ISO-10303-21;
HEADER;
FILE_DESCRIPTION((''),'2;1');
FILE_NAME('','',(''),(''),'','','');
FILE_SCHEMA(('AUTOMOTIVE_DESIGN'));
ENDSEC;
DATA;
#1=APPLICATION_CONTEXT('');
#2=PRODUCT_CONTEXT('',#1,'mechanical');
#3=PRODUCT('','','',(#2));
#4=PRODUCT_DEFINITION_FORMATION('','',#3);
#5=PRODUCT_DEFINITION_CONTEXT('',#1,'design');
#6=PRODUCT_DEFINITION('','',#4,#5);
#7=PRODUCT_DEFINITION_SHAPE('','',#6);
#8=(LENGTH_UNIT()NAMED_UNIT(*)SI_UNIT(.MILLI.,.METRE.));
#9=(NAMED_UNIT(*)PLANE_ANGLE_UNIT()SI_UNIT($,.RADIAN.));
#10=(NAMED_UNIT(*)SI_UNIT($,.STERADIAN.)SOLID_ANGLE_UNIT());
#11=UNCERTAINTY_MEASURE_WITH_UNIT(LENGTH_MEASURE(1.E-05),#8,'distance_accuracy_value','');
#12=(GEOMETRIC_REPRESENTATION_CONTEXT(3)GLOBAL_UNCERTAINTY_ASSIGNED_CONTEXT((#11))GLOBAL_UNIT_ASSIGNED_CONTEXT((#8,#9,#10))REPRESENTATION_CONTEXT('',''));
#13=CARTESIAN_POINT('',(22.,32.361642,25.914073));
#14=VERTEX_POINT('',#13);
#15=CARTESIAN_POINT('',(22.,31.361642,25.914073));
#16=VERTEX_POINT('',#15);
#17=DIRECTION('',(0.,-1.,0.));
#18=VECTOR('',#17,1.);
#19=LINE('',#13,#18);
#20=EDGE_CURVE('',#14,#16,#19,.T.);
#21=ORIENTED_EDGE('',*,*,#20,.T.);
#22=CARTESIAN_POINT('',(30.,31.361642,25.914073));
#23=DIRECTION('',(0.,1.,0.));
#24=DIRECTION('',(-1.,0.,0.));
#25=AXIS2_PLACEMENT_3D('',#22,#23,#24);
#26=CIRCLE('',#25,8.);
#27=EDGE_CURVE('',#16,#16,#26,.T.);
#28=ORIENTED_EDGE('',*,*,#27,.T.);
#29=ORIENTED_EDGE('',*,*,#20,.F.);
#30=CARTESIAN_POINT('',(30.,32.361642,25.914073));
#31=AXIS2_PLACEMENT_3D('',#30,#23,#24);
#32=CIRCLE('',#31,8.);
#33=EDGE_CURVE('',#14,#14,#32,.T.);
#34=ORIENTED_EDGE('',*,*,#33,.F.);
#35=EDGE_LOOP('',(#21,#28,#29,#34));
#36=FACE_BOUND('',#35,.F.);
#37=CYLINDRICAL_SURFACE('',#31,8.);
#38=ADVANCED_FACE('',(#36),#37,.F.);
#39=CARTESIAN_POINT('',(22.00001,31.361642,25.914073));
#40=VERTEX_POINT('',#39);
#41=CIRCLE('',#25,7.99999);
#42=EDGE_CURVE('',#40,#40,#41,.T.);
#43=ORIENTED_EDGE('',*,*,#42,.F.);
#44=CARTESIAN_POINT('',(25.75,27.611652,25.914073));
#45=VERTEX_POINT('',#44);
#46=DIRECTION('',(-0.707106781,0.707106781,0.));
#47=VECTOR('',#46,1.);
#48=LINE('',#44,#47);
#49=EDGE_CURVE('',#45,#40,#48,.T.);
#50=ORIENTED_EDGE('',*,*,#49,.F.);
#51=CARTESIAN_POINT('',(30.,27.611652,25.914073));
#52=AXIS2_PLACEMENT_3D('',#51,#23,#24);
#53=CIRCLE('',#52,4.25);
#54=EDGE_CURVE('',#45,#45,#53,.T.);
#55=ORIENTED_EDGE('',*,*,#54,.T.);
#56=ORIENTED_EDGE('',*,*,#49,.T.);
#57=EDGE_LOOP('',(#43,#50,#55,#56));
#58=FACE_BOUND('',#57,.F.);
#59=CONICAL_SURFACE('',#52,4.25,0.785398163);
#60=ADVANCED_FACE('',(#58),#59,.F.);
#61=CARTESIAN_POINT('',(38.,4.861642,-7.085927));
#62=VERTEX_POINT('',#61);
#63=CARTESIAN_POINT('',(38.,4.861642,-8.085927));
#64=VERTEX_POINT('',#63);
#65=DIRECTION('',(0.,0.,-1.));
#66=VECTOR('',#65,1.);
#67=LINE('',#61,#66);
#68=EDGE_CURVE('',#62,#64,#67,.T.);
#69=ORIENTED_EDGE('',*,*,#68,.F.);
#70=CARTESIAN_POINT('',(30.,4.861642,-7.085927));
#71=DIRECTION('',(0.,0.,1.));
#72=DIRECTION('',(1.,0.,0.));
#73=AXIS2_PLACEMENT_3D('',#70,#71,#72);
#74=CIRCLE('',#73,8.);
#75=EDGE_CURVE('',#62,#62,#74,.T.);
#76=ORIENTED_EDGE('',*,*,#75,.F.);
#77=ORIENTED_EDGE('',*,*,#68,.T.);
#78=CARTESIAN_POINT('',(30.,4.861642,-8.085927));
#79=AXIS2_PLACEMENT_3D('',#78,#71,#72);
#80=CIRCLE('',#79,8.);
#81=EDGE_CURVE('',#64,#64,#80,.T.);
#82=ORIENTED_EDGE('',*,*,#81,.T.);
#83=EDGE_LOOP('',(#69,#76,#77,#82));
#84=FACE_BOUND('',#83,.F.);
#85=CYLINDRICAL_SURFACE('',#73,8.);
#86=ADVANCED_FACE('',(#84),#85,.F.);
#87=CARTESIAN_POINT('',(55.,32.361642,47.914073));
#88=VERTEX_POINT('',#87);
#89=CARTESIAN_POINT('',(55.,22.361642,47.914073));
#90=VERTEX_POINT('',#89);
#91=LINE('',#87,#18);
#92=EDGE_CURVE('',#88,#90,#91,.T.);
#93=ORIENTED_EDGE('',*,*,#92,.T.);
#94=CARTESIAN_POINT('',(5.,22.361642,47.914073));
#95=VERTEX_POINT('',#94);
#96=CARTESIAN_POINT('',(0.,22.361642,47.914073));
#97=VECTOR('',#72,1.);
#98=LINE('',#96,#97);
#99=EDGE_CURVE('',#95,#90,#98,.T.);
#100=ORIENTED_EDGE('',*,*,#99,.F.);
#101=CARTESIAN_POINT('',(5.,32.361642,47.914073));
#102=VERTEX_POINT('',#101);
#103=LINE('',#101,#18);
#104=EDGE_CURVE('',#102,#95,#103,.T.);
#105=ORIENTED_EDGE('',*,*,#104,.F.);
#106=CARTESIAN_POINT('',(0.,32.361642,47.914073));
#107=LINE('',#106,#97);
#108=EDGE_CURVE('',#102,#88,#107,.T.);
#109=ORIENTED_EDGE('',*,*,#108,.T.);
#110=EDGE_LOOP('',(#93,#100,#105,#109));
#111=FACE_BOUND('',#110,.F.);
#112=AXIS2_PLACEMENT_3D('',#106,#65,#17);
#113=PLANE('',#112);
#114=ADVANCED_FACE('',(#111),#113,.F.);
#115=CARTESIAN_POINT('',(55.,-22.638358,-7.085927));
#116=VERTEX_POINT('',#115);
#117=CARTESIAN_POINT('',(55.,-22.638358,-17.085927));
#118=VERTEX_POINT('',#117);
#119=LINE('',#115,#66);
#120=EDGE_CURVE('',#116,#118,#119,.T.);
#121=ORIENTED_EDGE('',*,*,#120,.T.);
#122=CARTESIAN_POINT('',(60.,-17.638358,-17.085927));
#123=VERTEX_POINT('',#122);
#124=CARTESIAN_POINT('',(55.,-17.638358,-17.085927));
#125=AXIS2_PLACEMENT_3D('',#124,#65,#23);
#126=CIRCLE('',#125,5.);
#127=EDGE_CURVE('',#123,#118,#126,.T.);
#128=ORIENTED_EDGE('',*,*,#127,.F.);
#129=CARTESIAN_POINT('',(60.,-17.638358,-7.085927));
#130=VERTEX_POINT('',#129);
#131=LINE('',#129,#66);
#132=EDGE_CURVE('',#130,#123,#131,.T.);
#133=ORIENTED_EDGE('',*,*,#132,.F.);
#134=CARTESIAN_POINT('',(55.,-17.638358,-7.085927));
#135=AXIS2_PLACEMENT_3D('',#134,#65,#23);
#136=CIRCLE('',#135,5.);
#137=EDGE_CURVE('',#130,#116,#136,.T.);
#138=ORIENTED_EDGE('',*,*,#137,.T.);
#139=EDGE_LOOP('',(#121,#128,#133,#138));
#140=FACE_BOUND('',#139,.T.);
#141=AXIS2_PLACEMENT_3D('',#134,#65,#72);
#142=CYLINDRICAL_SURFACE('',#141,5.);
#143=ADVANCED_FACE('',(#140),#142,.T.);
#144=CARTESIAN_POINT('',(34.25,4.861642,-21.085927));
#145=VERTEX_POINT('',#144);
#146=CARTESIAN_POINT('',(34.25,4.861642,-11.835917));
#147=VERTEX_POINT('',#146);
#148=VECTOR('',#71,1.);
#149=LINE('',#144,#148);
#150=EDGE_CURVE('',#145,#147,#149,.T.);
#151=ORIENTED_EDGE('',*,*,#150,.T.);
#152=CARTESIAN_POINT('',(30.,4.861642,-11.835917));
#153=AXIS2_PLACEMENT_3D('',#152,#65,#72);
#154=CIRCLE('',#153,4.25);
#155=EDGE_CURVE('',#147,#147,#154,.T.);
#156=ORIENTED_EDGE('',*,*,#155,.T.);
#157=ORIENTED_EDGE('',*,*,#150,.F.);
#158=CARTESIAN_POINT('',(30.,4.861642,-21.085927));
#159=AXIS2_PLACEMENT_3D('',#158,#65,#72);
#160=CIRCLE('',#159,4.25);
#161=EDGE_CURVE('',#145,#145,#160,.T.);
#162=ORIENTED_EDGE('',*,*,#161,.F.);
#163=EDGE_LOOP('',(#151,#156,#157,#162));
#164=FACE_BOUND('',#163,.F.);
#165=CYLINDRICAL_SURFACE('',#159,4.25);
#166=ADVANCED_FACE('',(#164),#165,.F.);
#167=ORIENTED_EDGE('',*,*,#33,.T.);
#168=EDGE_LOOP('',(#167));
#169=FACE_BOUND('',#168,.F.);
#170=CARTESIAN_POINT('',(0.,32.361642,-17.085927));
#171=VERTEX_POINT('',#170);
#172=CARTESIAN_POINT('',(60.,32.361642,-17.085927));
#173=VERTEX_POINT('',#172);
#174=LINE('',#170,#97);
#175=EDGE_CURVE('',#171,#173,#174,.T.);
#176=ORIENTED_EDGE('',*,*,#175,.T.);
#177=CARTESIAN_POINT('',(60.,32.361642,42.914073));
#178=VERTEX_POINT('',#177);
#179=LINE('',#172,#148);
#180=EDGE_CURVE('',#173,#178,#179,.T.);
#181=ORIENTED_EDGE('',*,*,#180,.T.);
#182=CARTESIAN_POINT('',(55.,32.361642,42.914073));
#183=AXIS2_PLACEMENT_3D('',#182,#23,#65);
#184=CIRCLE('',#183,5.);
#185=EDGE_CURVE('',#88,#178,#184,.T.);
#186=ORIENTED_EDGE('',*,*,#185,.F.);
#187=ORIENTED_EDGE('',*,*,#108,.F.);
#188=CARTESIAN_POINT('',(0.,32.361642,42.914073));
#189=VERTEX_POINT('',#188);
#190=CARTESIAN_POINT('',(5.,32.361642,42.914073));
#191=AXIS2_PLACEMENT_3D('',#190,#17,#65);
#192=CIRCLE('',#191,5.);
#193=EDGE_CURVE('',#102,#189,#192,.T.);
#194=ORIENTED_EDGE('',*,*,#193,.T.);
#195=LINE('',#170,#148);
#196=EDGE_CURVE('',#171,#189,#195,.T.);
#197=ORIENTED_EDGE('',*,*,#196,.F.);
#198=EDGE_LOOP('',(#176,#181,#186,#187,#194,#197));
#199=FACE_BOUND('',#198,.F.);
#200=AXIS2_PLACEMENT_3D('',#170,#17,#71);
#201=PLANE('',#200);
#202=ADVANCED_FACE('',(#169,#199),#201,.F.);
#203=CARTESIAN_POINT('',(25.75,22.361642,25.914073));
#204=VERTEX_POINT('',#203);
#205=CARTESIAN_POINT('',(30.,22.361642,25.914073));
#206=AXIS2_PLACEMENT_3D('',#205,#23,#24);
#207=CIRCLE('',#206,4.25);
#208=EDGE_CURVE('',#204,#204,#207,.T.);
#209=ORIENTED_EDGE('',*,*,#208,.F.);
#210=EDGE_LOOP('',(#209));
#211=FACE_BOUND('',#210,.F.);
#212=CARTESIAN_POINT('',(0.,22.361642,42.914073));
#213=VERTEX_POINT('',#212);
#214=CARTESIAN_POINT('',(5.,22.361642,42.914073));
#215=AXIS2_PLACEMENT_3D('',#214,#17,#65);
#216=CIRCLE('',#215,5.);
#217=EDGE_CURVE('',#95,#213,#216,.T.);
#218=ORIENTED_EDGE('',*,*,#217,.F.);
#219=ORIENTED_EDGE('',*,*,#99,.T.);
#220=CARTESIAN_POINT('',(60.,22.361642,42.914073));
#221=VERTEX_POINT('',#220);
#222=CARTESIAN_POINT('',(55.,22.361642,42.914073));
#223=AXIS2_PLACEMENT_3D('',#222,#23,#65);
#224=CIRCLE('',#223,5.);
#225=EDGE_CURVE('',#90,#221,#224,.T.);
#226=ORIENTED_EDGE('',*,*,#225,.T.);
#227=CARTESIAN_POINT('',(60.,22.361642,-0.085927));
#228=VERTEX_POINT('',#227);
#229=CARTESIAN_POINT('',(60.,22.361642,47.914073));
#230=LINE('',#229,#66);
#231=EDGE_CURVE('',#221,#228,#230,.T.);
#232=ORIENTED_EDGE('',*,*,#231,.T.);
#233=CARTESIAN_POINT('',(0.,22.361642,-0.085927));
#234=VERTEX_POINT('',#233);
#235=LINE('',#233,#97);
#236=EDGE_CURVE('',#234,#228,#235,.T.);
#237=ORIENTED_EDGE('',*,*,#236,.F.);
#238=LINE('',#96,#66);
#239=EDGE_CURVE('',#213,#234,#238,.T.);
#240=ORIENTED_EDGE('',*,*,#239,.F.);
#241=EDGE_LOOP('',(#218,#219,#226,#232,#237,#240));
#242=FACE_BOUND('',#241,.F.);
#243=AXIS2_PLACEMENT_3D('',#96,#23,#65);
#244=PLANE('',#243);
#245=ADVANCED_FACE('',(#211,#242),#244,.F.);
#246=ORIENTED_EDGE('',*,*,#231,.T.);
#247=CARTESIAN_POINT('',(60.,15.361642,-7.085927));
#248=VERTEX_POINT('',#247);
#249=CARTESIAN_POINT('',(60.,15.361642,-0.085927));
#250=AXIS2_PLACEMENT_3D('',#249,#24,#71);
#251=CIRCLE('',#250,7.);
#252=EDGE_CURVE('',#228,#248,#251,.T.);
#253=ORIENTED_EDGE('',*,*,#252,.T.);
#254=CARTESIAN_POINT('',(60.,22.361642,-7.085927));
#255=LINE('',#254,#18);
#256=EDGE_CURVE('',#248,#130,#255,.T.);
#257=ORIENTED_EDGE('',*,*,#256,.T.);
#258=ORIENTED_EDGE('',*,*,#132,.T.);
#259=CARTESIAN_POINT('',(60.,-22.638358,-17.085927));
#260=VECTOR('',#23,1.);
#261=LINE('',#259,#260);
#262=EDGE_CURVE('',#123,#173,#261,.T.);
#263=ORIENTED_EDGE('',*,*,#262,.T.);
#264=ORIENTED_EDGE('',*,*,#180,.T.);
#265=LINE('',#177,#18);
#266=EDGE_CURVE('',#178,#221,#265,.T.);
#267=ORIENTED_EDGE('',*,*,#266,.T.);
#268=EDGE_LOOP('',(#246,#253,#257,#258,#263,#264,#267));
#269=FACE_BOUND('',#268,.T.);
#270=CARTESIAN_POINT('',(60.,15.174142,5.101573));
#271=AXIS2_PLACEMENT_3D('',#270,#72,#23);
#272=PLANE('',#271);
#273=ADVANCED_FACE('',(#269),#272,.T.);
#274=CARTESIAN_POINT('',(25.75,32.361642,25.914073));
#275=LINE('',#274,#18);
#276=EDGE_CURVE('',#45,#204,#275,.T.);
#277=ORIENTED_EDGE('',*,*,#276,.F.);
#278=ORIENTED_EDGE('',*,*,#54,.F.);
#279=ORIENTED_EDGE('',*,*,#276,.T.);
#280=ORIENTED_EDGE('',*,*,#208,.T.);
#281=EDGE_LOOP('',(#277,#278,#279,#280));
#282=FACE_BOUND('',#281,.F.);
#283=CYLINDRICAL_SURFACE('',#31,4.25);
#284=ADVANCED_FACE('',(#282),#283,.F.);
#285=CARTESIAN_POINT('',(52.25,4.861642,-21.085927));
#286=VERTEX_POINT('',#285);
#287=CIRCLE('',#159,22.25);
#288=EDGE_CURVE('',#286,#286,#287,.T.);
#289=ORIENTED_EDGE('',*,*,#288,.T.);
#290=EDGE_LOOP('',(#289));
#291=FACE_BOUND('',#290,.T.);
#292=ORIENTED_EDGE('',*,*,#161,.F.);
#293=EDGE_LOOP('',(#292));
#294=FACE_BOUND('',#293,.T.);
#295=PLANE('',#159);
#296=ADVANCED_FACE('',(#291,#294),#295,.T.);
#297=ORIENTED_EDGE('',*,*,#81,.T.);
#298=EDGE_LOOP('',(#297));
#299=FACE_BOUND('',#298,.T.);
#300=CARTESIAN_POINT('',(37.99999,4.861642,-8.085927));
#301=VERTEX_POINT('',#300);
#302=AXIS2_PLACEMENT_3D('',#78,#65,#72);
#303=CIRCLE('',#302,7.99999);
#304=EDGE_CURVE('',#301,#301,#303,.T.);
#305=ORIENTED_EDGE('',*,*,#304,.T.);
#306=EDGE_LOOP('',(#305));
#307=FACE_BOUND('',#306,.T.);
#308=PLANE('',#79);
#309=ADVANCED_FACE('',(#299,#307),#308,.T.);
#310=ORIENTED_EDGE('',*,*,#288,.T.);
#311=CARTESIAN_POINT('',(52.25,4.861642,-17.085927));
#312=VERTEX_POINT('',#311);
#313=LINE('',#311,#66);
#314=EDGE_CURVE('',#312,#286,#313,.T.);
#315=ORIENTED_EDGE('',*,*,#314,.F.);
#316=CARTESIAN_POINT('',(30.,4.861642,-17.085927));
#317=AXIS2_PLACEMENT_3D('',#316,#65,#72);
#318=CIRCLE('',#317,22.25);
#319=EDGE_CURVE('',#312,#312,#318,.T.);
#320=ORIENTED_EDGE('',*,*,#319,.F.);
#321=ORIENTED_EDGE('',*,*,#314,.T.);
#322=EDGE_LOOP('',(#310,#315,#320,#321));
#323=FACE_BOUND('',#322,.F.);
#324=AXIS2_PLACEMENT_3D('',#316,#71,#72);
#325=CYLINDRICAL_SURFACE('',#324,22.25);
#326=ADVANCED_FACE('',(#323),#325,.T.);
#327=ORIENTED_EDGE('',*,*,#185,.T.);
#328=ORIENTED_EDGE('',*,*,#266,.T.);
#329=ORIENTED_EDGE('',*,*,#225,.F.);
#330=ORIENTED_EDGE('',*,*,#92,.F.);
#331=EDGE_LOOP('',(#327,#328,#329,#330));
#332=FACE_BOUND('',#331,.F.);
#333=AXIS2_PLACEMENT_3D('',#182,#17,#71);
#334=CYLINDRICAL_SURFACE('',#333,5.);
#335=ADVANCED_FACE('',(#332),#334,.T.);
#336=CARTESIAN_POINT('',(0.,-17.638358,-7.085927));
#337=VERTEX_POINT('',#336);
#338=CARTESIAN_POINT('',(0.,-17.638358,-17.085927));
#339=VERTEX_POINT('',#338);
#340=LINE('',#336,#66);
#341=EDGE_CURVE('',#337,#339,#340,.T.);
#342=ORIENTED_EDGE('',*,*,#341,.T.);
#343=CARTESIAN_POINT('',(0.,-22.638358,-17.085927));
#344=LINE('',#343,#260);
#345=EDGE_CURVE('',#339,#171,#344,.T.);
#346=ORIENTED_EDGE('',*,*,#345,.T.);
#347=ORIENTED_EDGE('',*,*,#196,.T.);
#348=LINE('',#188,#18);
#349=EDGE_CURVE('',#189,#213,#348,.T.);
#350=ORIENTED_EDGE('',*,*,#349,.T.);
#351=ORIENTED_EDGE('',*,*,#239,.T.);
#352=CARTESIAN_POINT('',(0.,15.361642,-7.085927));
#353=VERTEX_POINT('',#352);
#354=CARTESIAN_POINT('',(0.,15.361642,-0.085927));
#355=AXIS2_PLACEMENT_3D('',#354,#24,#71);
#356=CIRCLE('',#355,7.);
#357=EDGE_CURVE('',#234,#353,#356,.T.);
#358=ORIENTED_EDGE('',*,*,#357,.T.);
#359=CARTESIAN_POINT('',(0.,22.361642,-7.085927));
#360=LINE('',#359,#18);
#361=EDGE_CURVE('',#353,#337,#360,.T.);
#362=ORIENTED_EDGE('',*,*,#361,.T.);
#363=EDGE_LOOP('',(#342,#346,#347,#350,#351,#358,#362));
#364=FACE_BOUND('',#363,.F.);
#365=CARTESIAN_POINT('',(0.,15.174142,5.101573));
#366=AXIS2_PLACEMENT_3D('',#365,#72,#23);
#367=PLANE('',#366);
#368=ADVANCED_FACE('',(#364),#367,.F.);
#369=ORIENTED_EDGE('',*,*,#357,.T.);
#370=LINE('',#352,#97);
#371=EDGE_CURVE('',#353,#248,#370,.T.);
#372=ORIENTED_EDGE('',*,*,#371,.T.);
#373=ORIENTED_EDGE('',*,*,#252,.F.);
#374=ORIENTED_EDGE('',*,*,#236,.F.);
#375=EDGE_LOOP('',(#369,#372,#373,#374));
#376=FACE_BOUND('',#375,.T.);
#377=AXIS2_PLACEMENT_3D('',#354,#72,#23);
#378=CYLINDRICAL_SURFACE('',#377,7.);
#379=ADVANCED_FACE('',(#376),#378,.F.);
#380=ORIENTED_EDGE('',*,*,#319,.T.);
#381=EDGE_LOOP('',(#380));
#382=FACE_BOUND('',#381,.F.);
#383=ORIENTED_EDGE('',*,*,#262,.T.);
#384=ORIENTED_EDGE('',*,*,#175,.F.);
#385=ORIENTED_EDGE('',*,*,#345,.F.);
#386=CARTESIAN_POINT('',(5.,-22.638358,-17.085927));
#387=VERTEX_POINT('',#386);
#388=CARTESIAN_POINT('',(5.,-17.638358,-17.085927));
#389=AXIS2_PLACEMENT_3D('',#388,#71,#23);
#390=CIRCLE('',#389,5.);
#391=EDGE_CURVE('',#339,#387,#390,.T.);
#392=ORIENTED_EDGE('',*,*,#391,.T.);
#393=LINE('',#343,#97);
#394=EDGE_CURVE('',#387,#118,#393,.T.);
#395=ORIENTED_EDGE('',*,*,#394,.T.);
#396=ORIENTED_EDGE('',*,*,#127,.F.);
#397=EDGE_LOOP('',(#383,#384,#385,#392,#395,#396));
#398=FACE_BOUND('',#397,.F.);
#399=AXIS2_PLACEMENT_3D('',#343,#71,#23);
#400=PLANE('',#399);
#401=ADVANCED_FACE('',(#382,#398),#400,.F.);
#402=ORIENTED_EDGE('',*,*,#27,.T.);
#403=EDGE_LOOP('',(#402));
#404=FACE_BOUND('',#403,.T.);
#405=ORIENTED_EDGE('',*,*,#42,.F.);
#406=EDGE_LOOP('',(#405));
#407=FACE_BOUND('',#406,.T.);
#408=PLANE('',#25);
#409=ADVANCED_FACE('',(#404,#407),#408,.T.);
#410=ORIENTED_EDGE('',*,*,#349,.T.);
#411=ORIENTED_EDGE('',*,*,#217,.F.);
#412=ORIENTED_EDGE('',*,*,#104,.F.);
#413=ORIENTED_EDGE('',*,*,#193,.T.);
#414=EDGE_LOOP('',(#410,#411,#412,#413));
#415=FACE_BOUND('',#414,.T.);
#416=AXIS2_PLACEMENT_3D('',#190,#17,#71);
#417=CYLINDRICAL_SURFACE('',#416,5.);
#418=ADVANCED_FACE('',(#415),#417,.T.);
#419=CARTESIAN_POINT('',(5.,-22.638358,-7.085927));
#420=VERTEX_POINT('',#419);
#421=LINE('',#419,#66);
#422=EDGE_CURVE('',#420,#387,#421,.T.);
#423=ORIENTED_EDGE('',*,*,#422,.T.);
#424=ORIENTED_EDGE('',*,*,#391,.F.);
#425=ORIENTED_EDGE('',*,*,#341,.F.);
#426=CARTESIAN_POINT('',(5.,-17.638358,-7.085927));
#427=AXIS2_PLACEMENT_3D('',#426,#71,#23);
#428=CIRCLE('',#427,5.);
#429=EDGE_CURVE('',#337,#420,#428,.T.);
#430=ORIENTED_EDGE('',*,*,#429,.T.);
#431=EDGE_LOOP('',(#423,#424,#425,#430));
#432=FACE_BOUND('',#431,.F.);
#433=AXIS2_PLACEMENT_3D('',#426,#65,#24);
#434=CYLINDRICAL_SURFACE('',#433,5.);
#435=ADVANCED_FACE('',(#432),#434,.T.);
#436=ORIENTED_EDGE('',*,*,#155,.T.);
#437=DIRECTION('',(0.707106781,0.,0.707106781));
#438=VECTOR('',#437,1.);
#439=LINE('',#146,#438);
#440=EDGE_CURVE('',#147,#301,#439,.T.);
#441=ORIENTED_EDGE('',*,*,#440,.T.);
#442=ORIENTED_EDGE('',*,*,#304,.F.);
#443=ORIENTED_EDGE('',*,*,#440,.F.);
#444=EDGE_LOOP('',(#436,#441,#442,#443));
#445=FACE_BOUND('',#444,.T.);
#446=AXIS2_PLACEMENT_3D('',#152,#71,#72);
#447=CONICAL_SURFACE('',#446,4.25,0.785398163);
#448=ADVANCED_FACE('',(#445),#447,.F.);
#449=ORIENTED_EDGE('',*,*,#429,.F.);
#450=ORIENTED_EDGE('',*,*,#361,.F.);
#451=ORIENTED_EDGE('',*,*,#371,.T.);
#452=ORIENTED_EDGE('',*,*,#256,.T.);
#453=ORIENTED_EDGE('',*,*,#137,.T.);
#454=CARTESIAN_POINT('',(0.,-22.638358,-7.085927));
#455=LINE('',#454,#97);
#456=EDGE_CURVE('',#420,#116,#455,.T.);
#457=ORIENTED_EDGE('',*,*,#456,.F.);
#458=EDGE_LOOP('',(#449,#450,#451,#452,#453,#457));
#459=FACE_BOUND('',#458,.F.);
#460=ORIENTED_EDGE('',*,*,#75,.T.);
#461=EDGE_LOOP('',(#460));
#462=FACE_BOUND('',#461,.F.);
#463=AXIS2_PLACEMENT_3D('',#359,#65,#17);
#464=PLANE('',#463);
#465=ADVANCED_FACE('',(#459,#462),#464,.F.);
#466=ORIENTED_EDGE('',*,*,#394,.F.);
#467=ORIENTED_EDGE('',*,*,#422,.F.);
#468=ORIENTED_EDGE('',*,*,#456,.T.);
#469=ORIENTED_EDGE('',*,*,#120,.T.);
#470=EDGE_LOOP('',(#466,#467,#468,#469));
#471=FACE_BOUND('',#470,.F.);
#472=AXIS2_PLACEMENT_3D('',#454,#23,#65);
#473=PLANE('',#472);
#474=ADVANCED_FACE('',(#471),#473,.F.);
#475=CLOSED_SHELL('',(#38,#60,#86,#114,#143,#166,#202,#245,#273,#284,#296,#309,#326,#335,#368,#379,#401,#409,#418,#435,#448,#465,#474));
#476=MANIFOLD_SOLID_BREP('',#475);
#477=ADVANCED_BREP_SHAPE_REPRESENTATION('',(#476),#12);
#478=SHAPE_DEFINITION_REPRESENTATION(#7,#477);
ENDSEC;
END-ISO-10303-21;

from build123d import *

# Parameters (mm, degrees)
F1_DEPTH  = 60
F2_R      = 22.25
F3_DEPTH  = 4
F4_R      = 4.25
F5_DEPTH  = 25
F6_R      = 8
F7_DEPTH  = 1
F8_SIZE   = 3.74999
F9_R      = 4.25
F10_DEPTH = 25
F11_R     = 8
F12_DEPTH = 1
F13_SIZE  = 3.74999
F14_R     = 5
F15_R     = 7


# Not quite as in the source:
# - a fillet or chamfer is up to 0.001 mm smaller than in the source, because OpenCascade refuses the exact size


with BuildPart() as f1:
    # F0 (on Right) → F1 (new body)
    with BuildSketch(Plane.YZ):
        Polygon((32.3616418088, -17.0859274204), (32.3616418088, 47.9140725796), (22.3616418088, 47.9140725796), (22.3616418088, -7.0859274204), (-22.6383581912, -7.0859274204), (-22.6383581912, -17.0859274204), align=None)
    extrude(amount=F1_DEPTH)

    # F2 (on face) → F3 (join)
    with BuildSketch(Plane(origin=(0, 0, -17.0859274204), x_dir=(1, 0, 0), z_dir=(0, 0, -1))):
        with Locations((30, -4.8616418088)):
            Circle(F2_R)
    extrude(amount=F3_DEPTH)

    # F4 (on face) → F5 (cut)
    with BuildSketch(Plane(origin=(0, 0, -21.0859274204), x_dir=(1, 0, 0), z_dir=(0, 0, -1))):
        with Locations((30, -4.8616418088)):
            Circle(F4_R)
    extrude(amount=-F5_DEPTH, mode=Mode.SUBTRACT)

    # F6 (on face) → F7 (cut)
    with BuildSketch(Plane.XY.offset(-7.0859274204)):
        with Locations((30, 4.8616418088)):
            Circle(F6_R)
    extrude(amount=-F7_DEPTH, mode=Mode.SUBTRACT)

    # F8 (size 3.75 in the source; OpenCascade refuses exactly that, so slightly less here)
    f8_edges = [f1.edges().sort_by_distance(p)[0] for p in [
        (25.75, 4.861642, -8.085927),
    ]]
    chamfer(f8_edges, length=F8_SIZE)

    # F9 (on face) → F10 (cut)
    with BuildSketch(Plane(origin=(0, 32.3616418088, 0), x_dir=(-1, 0, 0), z_dir=(0, 1, 0))):
        with Locations((-30, 25.9140725796)):
            Circle(F9_R)
    extrude(amount=-F10_DEPTH, mode=Mode.SUBTRACT)

    # F11 (on face) → F12 (cut)
    with BuildSketch(Plane(origin=(0, 32.3616418088, 0), x_dir=(-1, 0, 0), z_dir=(0, 1, 0))):
        with Locations((-30, 25.9140725796)):
            Circle(F11_R)
    extrude(amount=-F12_DEPTH, mode=Mode.SUBTRACT)

    # F13 (size 3.75 in the source; OpenCascade refuses exactly that, so slightly less here)
    f13_edges = [f1.edges().sort_by_distance(p)[0] for p in [
        (34.25, 31.361642, 25.914073),
    ]]
    chamfer(f13_edges, length=F13_SIZE)

    # F14
    f14_edges = [f1.edges().sort_by_distance(p)[0] for p in [
        (0, -22.638358, -12.085927),
        (60, -22.638358, -12.085927),
        (60, 27.361642, 47.914073),
        (0, 27.361642, 47.914073),
    ]]
    fillet(f14_edges, radius=F14_R)

    # F15
    f15_edges = [f1.edges().sort_by_distance(p)[0] for p in [
        (30, 22.361642, -7.085927),
    ]]
    fillet(f15_edges, radius=F15_R)


solid = f1.part
